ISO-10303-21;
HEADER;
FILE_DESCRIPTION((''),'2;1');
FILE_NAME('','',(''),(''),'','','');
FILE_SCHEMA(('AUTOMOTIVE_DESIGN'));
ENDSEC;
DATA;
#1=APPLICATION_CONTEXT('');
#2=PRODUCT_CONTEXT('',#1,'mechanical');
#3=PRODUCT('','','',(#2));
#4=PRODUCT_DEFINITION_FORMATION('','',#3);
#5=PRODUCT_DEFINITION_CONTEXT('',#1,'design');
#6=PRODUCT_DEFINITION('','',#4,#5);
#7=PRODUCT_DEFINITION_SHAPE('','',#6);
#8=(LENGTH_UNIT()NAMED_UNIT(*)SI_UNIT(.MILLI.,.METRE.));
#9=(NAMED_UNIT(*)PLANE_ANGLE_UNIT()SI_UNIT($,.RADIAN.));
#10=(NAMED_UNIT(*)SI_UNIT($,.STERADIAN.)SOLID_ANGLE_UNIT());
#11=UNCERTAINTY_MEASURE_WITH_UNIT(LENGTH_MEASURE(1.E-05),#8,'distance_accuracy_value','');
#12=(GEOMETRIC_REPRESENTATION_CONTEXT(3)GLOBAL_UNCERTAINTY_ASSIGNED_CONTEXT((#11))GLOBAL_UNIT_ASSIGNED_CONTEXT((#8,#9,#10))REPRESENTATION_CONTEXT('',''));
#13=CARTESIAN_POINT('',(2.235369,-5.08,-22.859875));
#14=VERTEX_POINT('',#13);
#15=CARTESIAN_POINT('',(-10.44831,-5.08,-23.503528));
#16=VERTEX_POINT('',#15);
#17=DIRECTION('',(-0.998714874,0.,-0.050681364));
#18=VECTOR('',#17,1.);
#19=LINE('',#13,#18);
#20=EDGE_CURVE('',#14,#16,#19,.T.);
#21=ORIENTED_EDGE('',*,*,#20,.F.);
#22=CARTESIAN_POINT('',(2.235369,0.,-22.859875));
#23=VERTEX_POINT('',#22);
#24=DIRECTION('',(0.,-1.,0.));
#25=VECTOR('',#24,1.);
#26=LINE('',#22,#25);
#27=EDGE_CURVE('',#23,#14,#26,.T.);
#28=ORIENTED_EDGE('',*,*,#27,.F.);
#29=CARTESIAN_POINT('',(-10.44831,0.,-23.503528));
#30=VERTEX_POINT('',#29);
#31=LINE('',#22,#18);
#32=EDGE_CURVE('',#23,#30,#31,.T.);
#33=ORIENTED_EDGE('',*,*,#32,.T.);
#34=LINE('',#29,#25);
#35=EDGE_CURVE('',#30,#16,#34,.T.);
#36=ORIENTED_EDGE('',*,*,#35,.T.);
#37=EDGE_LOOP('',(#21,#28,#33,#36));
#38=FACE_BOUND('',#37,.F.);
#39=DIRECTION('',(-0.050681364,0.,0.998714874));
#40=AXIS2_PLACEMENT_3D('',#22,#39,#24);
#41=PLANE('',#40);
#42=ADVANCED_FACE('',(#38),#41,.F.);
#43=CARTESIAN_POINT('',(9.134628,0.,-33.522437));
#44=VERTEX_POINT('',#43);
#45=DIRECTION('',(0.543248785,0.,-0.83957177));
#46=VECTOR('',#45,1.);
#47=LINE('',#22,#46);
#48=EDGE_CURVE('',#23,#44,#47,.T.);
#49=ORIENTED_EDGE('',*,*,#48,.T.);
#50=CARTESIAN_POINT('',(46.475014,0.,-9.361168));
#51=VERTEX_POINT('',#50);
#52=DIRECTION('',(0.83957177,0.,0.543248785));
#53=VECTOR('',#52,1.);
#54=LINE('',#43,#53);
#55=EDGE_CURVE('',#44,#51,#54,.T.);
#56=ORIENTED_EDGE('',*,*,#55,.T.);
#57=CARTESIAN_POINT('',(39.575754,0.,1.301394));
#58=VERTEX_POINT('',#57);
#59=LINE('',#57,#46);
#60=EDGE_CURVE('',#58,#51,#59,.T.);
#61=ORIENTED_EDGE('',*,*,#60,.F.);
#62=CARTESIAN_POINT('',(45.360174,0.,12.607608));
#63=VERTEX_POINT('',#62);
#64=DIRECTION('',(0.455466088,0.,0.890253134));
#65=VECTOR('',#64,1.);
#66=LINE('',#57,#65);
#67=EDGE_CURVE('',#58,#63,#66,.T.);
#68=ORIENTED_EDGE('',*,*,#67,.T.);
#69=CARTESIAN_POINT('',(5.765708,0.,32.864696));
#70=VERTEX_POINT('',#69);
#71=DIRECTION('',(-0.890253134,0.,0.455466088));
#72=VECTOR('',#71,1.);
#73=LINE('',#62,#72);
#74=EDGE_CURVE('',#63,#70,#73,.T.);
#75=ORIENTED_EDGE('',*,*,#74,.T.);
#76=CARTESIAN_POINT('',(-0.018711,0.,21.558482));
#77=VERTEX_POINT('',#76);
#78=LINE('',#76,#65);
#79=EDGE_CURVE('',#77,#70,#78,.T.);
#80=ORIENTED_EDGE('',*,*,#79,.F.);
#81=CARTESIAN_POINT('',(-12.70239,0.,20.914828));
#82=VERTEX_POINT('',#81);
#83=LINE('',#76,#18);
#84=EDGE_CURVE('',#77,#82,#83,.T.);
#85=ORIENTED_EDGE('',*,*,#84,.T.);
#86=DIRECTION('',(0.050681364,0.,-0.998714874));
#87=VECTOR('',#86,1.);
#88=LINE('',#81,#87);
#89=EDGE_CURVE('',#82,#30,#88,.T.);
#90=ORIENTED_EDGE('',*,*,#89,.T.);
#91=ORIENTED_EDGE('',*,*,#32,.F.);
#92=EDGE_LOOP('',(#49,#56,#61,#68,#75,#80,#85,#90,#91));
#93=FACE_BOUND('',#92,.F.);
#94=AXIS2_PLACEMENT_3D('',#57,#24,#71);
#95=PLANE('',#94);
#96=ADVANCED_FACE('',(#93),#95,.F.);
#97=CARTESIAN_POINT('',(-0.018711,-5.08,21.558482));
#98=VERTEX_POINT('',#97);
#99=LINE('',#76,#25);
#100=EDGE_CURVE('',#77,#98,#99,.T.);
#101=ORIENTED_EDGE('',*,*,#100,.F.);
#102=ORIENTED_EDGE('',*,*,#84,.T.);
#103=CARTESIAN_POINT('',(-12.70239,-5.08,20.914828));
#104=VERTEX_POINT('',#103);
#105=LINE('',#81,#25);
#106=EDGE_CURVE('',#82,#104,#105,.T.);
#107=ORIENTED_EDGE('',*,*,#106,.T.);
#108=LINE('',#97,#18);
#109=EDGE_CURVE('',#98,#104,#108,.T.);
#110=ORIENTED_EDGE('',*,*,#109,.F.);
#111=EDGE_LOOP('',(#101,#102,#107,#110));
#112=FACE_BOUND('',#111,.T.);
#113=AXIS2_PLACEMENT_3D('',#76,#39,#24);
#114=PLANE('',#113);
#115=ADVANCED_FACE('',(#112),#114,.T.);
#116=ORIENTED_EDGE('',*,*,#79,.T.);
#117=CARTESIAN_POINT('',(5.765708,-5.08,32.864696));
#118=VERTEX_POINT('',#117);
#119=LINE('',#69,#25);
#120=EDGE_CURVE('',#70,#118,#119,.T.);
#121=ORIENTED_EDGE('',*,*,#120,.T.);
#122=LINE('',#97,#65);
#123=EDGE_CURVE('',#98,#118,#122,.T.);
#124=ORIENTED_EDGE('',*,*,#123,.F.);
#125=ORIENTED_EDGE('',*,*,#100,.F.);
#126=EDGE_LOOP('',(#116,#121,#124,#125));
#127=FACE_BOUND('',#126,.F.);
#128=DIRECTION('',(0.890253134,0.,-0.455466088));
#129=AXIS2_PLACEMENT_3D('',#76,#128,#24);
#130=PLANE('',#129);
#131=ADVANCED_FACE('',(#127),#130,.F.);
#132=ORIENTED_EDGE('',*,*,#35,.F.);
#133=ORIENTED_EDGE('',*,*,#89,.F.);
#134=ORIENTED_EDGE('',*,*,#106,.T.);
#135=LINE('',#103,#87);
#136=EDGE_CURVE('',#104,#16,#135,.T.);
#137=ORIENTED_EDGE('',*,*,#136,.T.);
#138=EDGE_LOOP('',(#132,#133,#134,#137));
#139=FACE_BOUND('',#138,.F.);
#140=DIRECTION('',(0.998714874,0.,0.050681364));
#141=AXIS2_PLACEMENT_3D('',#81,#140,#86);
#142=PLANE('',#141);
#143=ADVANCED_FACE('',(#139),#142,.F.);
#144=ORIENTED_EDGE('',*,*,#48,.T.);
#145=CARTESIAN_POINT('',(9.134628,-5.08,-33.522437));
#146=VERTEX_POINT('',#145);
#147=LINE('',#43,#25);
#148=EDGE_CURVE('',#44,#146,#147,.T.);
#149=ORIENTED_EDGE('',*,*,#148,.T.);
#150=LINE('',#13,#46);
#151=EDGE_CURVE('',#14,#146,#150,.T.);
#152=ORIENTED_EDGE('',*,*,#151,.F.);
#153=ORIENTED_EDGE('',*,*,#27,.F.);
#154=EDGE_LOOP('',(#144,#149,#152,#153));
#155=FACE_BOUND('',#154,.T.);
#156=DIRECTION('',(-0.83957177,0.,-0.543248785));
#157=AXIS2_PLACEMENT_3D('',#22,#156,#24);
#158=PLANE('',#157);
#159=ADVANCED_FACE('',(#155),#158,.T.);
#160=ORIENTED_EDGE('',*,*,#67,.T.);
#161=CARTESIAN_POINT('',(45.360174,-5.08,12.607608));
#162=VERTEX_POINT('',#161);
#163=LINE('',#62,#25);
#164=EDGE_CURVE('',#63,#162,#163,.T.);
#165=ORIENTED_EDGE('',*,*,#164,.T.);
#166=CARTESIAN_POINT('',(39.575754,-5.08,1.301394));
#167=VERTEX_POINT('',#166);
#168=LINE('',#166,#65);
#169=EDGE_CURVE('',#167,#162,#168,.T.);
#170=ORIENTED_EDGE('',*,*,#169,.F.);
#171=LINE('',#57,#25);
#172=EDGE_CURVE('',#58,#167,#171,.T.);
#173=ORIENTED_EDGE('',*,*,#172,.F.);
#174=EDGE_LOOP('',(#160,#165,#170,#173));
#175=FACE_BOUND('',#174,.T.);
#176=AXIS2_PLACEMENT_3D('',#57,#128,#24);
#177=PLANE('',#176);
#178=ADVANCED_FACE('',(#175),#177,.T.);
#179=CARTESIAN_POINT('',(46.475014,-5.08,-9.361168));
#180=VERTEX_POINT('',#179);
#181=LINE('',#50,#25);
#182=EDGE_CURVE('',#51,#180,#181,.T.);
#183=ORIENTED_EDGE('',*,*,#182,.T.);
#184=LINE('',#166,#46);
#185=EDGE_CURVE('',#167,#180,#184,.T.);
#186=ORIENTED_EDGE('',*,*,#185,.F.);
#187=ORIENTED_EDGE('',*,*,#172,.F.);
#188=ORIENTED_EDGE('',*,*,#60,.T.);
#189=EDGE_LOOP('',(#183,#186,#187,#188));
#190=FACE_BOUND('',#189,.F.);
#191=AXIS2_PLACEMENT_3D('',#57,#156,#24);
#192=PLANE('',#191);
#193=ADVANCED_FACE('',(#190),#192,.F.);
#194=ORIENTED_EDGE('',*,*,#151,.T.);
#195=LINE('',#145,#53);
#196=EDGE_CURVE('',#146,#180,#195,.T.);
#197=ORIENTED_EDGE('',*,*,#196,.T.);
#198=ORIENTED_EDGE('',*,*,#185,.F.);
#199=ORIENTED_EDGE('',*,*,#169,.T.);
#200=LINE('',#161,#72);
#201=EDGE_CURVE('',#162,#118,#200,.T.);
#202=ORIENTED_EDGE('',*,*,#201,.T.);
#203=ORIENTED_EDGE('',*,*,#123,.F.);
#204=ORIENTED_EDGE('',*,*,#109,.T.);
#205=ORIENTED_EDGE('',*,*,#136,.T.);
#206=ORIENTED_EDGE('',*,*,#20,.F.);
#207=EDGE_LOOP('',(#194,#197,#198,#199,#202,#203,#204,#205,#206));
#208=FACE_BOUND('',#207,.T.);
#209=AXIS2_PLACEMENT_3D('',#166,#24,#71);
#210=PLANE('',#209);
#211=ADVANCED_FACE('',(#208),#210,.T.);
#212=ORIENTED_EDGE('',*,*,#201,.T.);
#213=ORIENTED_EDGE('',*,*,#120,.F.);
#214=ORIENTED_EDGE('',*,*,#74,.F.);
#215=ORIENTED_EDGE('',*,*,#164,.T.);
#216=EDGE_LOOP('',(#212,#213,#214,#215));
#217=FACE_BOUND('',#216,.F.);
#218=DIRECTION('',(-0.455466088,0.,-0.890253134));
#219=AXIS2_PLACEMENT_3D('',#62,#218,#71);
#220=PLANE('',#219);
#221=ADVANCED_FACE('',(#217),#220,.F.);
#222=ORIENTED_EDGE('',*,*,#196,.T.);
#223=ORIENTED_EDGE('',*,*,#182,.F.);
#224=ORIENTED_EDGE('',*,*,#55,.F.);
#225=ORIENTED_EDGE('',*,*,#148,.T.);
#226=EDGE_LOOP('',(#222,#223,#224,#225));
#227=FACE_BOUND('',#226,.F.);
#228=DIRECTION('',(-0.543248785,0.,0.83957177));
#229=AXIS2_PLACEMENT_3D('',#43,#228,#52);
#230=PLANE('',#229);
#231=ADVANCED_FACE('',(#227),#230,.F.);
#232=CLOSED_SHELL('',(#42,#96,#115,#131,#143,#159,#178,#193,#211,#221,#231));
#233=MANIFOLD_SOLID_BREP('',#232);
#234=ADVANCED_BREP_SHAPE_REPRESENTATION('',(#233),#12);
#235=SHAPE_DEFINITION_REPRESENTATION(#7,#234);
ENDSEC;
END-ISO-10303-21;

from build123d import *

# Parameters (mm, degrees)
F2_DEPTH = 5.08
F3_DEPTH = 12.7
F4_DEPTH = 12.7
F5_DEPTH = 12.7


# Not quite as in the source:
# - the program builds the solid bodies; features that only make, move or delete a surface that nothing else refers to are left out


with BuildPart() as f2:
    # F1 (on Front) → F2 (new body)
    with BuildSketch(Plane.XZ):
        Polygon((39.5757543065, 1.3013935037), (-0.0187108435, 21.5584816091), (2.2353688255, -22.8598751128), align=None)
    extrude(amount=F2_DEPTH)

    # F3 (add): a face of the model
    f3_faces = [f2.faces().sort_by_distance(p)[0] for p in [
        (1.108328991, -2.54, -0.6506967518),
    ]]
    extrude(f3_faces, amount=F3_DEPTH)

    # F4 (add): a face of the model
    f4_faces = [f2.faces().sort_by_distance(p)[0] for p in [
        (20.905561566, -2.54, -10.7792408046),
    ]]
    extrude(f4_faces, amount=F4_DEPTH)

    # F5 (add): a face of the model
    f5_faces = [f2.faces().sort_by_distance(p)[0] for p in [
        (19.7785217315, -2.54, 11.4299375564),
    ]]
    extrude(f5_faces, amount=F5_DEPTH)


solid = f2.part
